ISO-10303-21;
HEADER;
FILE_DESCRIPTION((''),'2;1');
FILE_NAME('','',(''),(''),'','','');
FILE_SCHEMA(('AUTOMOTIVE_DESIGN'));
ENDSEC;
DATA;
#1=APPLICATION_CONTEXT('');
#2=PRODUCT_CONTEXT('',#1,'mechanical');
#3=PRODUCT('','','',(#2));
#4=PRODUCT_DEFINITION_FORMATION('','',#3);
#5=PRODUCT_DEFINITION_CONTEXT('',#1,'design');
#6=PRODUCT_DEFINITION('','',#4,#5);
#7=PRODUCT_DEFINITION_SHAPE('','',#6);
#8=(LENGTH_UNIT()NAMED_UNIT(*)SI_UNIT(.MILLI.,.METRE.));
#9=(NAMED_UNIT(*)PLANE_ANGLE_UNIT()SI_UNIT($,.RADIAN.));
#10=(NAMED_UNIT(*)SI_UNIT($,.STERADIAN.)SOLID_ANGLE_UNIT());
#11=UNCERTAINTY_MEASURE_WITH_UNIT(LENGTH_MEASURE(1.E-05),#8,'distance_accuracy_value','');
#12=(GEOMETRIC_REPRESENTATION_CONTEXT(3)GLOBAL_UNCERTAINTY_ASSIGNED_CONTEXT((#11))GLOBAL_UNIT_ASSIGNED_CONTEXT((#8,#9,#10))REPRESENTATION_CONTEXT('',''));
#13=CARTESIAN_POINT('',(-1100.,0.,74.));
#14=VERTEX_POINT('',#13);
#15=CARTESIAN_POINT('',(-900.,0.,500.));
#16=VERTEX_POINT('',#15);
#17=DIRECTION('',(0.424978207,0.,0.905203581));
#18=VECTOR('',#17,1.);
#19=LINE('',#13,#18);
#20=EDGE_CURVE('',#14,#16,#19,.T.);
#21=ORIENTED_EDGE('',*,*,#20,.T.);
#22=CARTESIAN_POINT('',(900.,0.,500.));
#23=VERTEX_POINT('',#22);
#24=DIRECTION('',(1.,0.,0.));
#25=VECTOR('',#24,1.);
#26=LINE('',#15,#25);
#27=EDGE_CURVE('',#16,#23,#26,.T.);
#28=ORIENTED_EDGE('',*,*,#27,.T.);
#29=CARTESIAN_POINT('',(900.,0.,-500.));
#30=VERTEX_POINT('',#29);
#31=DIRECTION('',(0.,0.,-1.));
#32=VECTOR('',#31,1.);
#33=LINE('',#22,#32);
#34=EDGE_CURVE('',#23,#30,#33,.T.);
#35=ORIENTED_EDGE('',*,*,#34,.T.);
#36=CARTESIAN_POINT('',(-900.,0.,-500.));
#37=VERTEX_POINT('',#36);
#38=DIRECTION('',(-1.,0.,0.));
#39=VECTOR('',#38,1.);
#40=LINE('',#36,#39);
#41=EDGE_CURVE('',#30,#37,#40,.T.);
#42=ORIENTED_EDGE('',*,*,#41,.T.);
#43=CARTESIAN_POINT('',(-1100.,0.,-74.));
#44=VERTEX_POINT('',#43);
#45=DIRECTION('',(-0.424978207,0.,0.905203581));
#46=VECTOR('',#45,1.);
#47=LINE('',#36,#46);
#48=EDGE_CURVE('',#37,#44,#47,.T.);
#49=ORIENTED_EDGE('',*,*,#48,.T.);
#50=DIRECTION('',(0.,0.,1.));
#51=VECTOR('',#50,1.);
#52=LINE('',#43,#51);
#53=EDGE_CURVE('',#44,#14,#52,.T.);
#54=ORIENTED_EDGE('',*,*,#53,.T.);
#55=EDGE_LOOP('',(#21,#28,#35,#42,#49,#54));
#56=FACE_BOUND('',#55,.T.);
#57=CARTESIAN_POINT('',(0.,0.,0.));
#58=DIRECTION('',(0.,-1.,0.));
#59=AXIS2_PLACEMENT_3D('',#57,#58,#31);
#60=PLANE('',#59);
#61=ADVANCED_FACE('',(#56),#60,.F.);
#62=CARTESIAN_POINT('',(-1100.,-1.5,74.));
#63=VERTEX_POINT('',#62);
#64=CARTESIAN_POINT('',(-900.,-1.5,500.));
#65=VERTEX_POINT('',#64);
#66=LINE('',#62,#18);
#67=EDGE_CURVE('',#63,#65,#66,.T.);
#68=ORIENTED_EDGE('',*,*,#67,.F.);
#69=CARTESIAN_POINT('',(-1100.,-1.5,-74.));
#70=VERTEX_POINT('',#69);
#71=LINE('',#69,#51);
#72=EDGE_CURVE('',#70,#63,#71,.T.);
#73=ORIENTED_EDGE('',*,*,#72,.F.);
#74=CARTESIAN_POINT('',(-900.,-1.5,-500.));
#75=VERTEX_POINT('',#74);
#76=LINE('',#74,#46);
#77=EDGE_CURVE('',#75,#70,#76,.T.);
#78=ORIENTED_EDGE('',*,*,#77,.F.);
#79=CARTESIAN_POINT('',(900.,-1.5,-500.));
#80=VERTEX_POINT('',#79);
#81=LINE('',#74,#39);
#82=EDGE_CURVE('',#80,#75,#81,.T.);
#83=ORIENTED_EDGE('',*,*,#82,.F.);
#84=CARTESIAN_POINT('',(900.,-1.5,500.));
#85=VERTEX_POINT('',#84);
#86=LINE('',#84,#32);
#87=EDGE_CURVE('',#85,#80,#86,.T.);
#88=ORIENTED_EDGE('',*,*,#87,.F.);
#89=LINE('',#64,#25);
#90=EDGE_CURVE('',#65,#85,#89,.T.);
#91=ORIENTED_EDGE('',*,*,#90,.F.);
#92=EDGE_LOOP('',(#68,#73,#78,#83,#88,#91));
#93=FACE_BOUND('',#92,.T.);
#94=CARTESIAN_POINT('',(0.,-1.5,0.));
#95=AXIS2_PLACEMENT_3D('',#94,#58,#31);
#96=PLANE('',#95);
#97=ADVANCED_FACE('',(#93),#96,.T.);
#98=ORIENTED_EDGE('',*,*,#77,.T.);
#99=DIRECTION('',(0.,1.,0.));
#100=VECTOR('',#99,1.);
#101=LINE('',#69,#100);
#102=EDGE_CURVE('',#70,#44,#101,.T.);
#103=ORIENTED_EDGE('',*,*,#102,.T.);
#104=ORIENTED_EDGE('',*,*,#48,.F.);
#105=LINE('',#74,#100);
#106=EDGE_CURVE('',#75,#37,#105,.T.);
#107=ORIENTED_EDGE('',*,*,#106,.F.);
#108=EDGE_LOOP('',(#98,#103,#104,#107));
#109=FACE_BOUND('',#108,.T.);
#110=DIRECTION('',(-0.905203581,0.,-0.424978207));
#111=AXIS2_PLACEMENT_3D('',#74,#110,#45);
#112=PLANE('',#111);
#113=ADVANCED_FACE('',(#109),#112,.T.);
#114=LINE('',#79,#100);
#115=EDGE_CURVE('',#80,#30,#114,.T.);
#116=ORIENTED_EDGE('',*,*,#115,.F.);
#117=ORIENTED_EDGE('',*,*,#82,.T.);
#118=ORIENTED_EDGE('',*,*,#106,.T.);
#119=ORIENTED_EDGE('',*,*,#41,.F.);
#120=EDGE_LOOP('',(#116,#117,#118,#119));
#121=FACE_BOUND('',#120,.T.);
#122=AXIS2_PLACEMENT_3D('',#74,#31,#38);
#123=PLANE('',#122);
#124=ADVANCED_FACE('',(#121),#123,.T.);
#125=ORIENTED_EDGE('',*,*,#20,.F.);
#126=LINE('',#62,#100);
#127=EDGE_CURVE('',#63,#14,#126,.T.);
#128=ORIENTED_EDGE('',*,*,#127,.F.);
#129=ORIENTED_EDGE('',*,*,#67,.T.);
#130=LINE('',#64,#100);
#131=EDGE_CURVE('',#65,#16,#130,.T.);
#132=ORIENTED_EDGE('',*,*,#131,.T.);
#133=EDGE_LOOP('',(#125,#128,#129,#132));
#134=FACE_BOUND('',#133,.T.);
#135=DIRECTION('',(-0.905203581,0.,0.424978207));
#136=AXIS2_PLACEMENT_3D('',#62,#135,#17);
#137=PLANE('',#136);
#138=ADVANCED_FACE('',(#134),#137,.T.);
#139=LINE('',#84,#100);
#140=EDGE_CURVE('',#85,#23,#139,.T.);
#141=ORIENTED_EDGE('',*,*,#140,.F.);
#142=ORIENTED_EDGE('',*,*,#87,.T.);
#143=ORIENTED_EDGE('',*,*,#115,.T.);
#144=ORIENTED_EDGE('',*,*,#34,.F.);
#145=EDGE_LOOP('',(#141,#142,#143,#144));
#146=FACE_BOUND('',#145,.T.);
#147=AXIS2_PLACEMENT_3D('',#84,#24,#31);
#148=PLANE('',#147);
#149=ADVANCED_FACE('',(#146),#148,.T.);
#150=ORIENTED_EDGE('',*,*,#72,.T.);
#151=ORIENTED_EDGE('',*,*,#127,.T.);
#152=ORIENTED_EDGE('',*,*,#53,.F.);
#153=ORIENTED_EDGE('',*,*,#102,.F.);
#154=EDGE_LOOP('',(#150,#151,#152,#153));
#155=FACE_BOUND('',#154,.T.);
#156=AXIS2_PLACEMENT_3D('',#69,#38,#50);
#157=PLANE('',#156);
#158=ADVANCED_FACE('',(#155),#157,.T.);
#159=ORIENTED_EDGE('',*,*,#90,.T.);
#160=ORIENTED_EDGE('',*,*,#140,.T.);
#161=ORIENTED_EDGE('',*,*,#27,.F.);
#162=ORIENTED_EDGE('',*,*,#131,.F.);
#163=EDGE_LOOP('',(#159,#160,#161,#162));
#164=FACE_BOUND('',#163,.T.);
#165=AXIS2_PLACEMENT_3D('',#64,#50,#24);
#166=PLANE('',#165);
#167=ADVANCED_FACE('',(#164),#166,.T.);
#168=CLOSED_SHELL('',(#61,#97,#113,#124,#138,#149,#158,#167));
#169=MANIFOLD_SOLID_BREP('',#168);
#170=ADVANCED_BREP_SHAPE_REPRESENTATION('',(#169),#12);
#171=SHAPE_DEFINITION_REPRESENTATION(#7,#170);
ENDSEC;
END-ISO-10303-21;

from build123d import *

# Parameters (mm, degrees)
BASE_FLANGIA1_DEPTH = 1.5


# Sheet-metal steps are written as plain solids
with BuildPart() as part:
    # Schizzo1 → Base-Flangia1 (new body)
    with BuildSketch(Plane(origin=(0, 0, 0), x_dir=(1, 0, 0), z_dir=(0, 1, 0))):
        Polygon((-900, 500), (-1100, 74), (-1100, -74), (-900, -500), (900, -500), (900, 500), align=None)
    extrude(amount=-BASE_FLANGIA1_DEPTH)


solid = part.part
